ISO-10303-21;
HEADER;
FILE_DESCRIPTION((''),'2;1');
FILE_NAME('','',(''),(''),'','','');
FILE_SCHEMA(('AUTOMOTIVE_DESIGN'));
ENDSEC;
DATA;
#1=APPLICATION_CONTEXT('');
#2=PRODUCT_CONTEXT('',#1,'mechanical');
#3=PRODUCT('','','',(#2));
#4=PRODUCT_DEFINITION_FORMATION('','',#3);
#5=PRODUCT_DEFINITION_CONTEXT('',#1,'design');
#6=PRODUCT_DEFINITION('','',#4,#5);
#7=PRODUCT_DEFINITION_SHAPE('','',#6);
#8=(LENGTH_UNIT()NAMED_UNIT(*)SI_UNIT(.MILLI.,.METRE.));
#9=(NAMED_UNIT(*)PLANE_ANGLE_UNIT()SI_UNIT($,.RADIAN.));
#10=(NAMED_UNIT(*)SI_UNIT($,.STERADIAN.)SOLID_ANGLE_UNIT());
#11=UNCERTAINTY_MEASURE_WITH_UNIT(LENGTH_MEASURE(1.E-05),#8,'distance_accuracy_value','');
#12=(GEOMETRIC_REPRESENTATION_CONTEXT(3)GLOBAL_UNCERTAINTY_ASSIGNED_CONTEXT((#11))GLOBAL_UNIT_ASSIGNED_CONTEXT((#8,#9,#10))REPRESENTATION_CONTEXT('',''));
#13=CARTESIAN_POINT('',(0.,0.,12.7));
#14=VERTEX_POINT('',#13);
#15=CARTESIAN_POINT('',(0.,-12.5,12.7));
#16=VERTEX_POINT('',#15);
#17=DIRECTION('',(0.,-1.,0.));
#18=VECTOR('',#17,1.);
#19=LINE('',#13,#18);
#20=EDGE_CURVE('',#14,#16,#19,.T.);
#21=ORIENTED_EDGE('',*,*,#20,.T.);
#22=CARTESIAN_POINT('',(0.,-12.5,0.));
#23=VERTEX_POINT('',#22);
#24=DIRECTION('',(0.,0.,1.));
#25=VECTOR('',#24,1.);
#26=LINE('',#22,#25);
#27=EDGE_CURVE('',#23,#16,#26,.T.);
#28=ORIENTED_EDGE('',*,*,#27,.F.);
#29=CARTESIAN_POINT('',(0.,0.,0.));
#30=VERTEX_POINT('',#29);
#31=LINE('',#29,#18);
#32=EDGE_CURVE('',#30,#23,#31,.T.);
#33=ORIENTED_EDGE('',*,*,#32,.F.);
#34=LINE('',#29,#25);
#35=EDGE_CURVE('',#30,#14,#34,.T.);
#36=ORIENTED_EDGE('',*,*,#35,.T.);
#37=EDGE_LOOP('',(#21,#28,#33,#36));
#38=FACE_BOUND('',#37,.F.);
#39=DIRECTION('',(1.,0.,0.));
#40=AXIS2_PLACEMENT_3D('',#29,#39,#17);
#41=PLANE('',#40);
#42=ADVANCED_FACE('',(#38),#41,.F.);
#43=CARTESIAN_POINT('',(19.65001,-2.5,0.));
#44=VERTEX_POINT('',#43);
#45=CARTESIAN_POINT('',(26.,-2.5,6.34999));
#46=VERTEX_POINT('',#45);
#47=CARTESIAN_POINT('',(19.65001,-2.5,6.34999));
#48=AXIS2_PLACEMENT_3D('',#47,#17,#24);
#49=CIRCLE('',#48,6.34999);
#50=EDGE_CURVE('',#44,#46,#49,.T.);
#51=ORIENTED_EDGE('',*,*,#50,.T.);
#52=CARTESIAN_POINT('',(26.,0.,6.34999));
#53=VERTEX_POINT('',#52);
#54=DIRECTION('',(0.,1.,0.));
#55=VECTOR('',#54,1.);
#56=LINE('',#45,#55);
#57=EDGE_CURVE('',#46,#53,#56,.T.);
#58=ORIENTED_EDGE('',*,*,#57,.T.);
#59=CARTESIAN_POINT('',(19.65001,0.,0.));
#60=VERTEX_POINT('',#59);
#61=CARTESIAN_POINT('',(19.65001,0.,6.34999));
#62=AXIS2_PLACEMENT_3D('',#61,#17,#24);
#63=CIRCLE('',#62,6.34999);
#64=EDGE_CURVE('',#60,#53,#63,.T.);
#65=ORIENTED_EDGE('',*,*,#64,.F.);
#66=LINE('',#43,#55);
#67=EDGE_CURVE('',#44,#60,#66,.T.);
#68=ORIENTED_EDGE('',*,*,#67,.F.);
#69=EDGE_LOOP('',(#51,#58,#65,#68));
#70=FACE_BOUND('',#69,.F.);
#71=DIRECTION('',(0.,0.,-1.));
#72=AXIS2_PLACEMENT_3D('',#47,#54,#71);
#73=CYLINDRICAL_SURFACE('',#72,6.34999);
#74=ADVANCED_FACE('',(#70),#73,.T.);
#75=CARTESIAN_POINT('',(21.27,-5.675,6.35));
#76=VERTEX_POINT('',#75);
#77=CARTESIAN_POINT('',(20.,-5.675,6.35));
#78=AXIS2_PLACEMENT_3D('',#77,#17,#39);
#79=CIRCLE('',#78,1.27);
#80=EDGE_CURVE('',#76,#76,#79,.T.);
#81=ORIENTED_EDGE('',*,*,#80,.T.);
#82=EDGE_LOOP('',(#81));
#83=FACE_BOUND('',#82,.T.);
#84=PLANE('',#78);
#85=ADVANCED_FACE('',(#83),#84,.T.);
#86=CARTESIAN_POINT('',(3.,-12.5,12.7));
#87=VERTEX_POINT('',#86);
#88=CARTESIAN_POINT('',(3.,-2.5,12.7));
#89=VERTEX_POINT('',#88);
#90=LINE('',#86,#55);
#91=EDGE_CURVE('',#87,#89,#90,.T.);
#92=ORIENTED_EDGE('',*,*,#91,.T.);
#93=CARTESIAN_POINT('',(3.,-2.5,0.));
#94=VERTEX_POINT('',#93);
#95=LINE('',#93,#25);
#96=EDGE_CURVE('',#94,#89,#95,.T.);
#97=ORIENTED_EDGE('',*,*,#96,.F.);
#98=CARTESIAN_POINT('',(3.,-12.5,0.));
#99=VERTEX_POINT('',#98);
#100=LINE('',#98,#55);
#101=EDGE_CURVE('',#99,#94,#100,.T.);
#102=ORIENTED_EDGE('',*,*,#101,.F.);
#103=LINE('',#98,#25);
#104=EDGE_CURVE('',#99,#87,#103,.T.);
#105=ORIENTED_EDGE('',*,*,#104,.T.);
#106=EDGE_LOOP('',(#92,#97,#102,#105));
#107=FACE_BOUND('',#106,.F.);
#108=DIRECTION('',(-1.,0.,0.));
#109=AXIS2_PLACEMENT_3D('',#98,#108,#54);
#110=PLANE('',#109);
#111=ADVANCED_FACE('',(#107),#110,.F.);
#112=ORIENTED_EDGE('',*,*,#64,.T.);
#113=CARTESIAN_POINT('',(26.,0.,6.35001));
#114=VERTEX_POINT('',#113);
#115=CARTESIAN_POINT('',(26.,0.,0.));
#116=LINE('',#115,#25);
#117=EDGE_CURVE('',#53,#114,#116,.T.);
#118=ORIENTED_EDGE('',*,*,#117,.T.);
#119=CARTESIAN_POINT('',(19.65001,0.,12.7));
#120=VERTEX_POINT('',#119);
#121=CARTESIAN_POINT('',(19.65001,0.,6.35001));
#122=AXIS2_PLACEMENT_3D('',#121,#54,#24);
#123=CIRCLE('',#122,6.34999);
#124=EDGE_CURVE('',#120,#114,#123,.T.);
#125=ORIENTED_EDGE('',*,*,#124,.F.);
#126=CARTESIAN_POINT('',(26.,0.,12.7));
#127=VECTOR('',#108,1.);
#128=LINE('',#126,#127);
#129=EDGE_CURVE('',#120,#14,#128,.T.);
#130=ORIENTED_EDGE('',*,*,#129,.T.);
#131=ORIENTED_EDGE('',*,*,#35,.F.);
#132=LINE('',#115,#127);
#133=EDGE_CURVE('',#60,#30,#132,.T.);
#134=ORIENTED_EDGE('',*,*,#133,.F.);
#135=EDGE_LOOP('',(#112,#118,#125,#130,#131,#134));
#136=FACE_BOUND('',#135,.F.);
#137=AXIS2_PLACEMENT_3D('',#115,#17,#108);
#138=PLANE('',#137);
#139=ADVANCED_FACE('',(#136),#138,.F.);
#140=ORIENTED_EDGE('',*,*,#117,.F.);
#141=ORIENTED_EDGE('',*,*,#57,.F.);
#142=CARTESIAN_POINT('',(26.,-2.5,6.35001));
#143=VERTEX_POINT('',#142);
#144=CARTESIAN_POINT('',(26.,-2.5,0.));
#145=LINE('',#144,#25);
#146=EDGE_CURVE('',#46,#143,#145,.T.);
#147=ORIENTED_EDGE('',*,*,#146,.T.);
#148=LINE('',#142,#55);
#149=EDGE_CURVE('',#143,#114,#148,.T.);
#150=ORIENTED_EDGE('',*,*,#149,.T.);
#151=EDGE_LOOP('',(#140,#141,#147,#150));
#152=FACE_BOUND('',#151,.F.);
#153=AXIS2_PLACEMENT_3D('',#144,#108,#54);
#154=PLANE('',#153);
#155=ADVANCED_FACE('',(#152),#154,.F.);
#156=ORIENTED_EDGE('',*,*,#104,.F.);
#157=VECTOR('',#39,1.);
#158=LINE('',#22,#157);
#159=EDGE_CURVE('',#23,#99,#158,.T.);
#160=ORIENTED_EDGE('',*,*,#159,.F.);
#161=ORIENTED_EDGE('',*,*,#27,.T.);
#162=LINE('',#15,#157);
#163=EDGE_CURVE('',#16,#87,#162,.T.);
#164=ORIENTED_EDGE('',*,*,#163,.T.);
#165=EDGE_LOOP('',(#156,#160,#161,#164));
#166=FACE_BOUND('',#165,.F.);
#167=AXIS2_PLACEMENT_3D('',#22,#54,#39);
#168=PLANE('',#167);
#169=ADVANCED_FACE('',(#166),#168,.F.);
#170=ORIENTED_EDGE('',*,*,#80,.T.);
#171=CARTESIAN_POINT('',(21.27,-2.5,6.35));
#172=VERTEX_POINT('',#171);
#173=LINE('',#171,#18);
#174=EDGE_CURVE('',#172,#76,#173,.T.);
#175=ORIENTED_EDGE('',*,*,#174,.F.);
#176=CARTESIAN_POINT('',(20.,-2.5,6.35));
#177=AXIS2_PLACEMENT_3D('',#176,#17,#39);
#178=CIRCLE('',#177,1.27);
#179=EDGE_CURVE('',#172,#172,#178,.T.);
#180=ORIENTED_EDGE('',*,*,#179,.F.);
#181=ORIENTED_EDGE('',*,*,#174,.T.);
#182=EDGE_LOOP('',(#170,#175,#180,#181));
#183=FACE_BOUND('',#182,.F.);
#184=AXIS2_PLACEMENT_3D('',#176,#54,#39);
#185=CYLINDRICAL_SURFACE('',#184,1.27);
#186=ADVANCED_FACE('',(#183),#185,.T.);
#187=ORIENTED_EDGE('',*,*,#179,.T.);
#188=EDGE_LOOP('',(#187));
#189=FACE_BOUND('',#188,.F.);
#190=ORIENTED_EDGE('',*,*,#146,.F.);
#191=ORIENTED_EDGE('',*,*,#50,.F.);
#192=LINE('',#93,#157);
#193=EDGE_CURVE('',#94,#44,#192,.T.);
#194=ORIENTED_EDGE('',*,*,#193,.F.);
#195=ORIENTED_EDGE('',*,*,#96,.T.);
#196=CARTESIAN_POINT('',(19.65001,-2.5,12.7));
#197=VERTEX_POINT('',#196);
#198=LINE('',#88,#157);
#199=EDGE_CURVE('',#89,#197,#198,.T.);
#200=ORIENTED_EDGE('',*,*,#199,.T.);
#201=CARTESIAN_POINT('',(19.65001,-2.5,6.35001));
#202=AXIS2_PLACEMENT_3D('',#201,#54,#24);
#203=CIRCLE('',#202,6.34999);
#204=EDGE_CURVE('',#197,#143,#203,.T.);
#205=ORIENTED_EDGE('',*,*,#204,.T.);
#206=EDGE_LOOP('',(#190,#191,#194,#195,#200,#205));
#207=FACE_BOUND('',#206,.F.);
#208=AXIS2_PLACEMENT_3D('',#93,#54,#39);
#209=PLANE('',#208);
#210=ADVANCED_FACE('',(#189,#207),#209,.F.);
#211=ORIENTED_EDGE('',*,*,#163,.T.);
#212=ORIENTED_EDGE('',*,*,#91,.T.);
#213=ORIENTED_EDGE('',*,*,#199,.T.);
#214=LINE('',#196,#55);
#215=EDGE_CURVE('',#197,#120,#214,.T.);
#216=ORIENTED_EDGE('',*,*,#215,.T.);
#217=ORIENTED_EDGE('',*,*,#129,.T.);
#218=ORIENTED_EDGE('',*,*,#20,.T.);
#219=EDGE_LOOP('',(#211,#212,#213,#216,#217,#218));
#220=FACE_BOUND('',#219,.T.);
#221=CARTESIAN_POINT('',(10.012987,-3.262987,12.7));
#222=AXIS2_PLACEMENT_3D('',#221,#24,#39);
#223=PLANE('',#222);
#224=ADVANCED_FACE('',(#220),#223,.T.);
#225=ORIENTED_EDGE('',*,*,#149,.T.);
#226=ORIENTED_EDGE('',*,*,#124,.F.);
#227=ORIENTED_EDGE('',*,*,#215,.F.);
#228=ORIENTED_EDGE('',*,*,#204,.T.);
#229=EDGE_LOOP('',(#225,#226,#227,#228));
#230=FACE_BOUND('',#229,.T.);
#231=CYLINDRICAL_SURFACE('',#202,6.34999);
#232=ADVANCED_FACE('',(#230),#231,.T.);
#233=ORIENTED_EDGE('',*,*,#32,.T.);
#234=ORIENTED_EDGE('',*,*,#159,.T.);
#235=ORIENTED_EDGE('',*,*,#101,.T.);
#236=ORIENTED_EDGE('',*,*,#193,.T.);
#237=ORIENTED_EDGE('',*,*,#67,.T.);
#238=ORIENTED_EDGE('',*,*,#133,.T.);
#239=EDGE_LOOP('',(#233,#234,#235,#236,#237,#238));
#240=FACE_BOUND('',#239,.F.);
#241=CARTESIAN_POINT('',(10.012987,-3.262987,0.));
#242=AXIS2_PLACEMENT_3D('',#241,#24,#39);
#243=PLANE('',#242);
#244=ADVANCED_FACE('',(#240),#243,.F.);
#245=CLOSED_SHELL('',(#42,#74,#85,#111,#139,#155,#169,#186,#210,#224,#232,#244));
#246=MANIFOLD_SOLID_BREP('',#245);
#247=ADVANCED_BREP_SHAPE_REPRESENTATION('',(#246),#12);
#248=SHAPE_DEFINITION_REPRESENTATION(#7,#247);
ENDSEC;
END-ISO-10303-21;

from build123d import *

# Parameters (mm, degrees)
F1_DEPTH = 12.7
F2_R     = 1.27
F3_DEPTH = 3.175
F4_R     = 6.34999


# Not quite as in the source:
# - a fillet or chamfer is up to 0.001 mm smaller than in the source, because OpenCascade refuses the exact size


with BuildPart() as f1:
    # F0 (on Top) → F1 (new body)
    with BuildSketch(Plane.XY):
        Polygon((0, -12.5), (3, -12.5), (3, -2.5), (26, -2.5), (26, 0), (0, 0), align=None)
    extrude(amount=F1_DEPTH)

    # F2 (on face) → F3 (join)
    with BuildSketch(Plane.XZ.offset(2.5)):
        with Locations((20, 6.35)):
            Circle(F2_R)
    extrude(amount=F3_DEPTH)

    # F4 (radius 6.35 in the source; OpenCascade refuses exactly that, so slightly less here)
    f4_edges = [f1.edges().sort_by_distance(p)[0] for p in [
        (26, -1.25, 12.7),
        (26, -1.25, 0),
    ]]
    fillet(f4_edges, radius=F4_R)


solid = f1.part
